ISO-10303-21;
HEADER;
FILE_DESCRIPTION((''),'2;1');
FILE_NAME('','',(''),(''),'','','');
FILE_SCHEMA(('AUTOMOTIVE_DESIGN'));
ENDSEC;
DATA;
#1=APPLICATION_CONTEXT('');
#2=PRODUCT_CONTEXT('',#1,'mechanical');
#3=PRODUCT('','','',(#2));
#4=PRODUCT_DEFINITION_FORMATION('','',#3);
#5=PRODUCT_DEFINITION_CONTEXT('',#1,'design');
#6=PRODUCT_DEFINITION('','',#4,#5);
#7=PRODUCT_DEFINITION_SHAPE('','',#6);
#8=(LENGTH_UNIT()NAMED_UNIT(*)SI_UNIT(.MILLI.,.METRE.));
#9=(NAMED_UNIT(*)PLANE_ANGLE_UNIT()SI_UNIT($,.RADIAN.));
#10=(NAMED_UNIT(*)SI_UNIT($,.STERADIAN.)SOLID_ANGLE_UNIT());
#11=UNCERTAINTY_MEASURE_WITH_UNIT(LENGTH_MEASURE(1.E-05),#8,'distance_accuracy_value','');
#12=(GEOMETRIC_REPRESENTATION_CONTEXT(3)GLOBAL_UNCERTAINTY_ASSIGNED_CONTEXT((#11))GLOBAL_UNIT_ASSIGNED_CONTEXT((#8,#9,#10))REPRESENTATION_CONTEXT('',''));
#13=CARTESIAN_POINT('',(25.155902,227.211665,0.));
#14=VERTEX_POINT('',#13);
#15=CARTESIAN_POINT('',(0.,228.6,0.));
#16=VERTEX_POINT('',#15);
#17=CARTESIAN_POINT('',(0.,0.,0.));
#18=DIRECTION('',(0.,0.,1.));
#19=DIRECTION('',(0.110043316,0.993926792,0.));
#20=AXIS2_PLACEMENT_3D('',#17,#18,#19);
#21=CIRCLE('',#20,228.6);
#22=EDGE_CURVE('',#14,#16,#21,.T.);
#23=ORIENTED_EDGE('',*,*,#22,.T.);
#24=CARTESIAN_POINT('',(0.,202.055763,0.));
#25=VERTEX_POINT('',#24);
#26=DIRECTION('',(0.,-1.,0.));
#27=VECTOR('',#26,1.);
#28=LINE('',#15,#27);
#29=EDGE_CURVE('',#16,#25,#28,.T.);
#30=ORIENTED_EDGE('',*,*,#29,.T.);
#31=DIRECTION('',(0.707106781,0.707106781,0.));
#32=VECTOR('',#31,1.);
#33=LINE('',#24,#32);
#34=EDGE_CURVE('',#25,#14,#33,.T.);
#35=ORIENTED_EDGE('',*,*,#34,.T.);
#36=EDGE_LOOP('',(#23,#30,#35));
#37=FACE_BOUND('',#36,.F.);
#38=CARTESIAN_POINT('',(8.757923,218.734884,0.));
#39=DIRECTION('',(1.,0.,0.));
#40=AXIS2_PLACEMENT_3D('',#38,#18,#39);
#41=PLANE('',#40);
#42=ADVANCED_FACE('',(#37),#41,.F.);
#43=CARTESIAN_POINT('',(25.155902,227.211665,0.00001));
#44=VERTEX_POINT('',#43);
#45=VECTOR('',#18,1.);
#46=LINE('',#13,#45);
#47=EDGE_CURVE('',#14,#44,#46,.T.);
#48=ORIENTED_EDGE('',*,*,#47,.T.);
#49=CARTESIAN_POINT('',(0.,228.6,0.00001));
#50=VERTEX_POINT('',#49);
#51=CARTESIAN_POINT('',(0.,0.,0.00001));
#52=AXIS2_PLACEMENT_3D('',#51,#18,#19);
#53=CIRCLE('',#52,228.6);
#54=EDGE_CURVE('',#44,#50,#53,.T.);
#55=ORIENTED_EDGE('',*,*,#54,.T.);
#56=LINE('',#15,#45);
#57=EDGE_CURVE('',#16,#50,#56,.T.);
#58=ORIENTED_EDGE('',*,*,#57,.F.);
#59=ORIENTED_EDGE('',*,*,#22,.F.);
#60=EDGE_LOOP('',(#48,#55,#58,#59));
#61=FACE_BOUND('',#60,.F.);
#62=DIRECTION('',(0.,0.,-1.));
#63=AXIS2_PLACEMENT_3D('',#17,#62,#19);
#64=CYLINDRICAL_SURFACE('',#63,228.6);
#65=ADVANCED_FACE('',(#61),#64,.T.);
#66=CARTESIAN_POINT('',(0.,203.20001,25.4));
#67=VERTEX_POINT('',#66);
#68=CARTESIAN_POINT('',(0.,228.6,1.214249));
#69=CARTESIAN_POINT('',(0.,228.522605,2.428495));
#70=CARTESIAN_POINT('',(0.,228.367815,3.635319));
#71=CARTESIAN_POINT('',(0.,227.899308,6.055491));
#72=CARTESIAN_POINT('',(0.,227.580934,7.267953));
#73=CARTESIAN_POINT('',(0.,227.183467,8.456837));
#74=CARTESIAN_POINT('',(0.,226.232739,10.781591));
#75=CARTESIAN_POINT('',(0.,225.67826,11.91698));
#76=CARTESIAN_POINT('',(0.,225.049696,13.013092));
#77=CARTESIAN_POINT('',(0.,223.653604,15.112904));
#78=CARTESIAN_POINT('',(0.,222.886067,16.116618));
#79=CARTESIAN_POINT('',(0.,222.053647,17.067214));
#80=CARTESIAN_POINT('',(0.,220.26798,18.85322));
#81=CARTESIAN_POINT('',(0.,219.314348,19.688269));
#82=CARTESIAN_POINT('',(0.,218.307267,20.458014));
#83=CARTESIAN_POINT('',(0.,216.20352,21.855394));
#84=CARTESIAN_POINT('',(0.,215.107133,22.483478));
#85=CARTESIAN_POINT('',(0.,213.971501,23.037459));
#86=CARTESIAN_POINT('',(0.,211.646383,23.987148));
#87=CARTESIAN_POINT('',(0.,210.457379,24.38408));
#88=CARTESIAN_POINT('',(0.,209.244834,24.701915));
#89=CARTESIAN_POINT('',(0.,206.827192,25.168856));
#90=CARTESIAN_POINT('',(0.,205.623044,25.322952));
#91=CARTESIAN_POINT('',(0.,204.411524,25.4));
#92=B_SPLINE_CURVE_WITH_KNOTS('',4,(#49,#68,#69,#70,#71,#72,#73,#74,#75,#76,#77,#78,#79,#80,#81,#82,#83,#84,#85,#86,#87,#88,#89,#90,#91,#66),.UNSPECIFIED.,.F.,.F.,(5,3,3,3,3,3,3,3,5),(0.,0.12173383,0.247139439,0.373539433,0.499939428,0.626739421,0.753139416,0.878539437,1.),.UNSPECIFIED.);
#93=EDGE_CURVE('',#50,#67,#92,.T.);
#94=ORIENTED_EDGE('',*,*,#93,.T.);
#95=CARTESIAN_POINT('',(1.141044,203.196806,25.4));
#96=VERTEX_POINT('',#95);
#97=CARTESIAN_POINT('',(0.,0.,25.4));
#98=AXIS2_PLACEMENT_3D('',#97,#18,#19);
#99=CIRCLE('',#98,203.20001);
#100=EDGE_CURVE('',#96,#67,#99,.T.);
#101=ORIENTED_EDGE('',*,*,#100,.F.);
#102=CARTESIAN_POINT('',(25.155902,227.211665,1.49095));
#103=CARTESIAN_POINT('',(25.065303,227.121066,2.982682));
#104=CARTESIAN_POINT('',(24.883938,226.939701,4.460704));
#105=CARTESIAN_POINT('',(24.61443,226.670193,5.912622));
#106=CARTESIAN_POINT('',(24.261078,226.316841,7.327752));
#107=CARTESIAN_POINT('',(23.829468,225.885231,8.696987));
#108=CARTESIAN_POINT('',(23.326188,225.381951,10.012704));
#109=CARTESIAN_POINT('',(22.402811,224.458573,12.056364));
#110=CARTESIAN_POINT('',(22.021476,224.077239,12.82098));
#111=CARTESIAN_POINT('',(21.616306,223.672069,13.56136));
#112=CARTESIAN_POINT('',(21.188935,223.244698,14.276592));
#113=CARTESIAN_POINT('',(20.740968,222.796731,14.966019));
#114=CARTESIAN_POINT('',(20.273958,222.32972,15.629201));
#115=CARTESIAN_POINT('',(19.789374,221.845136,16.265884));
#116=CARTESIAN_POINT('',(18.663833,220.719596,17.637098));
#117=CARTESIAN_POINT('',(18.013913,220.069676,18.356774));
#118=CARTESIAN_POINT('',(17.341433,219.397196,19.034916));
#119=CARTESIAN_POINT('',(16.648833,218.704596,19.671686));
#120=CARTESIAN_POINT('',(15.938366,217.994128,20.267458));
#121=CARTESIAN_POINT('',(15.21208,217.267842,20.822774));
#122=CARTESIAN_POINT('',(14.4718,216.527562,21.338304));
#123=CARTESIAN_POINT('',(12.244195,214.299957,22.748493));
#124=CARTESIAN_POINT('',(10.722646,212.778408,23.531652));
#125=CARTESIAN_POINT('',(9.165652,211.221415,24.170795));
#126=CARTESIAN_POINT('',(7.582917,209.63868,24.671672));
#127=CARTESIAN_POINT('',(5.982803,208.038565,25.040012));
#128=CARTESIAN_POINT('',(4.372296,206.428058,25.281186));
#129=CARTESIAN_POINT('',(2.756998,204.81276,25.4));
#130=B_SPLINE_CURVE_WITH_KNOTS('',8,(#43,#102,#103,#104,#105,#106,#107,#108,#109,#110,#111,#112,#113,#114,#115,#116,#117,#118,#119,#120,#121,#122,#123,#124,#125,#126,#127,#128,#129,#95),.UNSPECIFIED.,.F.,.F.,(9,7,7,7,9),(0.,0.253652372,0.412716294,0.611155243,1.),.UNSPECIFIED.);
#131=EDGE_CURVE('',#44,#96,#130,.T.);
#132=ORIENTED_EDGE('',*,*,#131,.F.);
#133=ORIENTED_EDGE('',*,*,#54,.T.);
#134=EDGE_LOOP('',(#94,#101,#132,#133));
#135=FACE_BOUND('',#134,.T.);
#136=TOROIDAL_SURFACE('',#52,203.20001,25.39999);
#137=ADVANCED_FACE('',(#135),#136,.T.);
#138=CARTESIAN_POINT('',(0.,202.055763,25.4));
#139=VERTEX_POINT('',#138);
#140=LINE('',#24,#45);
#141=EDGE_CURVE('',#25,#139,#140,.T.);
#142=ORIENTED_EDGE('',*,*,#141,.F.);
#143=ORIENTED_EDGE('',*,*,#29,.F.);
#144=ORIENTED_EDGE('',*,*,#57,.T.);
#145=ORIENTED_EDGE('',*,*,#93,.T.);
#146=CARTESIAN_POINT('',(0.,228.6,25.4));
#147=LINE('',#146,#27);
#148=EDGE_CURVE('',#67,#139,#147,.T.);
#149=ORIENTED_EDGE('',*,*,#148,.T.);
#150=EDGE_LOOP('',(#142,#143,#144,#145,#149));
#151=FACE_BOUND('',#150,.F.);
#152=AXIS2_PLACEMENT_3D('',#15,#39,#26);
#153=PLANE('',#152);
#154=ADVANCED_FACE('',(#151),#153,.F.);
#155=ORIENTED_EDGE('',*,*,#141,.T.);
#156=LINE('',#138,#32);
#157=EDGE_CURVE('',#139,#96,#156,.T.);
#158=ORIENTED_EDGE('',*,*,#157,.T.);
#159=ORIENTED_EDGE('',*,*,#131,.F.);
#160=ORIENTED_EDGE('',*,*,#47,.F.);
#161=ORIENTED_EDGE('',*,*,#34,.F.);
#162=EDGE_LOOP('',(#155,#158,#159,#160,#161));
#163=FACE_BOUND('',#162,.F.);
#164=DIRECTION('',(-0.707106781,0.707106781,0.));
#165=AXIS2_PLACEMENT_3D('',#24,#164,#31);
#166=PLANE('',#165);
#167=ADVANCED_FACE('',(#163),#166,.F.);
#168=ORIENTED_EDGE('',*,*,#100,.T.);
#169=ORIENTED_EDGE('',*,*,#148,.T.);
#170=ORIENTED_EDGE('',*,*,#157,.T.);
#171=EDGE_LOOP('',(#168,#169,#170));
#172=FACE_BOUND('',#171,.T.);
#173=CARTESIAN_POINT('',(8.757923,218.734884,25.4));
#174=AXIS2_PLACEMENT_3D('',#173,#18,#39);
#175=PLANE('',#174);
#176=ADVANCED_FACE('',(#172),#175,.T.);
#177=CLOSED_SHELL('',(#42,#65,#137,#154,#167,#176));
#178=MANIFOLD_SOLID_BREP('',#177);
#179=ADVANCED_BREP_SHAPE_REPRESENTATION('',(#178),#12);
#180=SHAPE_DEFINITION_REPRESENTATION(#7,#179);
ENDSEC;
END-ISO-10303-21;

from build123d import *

# Parameters (mm, degrees)
F2_DEPTH = 25.4
F3_R     = 25.39999


# Not quite as in the source:
# - a fillet or chamfer is up to 0.001 mm smaller than in the source, because OpenCascade refuses the exact size


with BuildPart() as f2:
    # F1 (on face) → F2 (new body)
    with BuildSketch(Plane.XY):
        with BuildLine():
            ThreePointArc((25.1559020156, 227.2116647397), (12.5970917379, 228.2526522951), (0, 228.6))
            Line((0, 228.6), (0, 202.0557627241))
            Line((0, 202.0557627241), (25.1559020156, 227.2116647397))
        make_face()
    extrude(amount=F2_DEPTH)

    # F3 (radius 25.4 in the source; OpenCascade refuses exactly that, so slightly less here)
    f3_edges = [f2.edges().sort_by_distance(p)[0] for p in [
        (12.597092, 228.252652, 25.4),
    ]]
    fillet(f3_edges, radius=F3_R)


solid = f2.part
